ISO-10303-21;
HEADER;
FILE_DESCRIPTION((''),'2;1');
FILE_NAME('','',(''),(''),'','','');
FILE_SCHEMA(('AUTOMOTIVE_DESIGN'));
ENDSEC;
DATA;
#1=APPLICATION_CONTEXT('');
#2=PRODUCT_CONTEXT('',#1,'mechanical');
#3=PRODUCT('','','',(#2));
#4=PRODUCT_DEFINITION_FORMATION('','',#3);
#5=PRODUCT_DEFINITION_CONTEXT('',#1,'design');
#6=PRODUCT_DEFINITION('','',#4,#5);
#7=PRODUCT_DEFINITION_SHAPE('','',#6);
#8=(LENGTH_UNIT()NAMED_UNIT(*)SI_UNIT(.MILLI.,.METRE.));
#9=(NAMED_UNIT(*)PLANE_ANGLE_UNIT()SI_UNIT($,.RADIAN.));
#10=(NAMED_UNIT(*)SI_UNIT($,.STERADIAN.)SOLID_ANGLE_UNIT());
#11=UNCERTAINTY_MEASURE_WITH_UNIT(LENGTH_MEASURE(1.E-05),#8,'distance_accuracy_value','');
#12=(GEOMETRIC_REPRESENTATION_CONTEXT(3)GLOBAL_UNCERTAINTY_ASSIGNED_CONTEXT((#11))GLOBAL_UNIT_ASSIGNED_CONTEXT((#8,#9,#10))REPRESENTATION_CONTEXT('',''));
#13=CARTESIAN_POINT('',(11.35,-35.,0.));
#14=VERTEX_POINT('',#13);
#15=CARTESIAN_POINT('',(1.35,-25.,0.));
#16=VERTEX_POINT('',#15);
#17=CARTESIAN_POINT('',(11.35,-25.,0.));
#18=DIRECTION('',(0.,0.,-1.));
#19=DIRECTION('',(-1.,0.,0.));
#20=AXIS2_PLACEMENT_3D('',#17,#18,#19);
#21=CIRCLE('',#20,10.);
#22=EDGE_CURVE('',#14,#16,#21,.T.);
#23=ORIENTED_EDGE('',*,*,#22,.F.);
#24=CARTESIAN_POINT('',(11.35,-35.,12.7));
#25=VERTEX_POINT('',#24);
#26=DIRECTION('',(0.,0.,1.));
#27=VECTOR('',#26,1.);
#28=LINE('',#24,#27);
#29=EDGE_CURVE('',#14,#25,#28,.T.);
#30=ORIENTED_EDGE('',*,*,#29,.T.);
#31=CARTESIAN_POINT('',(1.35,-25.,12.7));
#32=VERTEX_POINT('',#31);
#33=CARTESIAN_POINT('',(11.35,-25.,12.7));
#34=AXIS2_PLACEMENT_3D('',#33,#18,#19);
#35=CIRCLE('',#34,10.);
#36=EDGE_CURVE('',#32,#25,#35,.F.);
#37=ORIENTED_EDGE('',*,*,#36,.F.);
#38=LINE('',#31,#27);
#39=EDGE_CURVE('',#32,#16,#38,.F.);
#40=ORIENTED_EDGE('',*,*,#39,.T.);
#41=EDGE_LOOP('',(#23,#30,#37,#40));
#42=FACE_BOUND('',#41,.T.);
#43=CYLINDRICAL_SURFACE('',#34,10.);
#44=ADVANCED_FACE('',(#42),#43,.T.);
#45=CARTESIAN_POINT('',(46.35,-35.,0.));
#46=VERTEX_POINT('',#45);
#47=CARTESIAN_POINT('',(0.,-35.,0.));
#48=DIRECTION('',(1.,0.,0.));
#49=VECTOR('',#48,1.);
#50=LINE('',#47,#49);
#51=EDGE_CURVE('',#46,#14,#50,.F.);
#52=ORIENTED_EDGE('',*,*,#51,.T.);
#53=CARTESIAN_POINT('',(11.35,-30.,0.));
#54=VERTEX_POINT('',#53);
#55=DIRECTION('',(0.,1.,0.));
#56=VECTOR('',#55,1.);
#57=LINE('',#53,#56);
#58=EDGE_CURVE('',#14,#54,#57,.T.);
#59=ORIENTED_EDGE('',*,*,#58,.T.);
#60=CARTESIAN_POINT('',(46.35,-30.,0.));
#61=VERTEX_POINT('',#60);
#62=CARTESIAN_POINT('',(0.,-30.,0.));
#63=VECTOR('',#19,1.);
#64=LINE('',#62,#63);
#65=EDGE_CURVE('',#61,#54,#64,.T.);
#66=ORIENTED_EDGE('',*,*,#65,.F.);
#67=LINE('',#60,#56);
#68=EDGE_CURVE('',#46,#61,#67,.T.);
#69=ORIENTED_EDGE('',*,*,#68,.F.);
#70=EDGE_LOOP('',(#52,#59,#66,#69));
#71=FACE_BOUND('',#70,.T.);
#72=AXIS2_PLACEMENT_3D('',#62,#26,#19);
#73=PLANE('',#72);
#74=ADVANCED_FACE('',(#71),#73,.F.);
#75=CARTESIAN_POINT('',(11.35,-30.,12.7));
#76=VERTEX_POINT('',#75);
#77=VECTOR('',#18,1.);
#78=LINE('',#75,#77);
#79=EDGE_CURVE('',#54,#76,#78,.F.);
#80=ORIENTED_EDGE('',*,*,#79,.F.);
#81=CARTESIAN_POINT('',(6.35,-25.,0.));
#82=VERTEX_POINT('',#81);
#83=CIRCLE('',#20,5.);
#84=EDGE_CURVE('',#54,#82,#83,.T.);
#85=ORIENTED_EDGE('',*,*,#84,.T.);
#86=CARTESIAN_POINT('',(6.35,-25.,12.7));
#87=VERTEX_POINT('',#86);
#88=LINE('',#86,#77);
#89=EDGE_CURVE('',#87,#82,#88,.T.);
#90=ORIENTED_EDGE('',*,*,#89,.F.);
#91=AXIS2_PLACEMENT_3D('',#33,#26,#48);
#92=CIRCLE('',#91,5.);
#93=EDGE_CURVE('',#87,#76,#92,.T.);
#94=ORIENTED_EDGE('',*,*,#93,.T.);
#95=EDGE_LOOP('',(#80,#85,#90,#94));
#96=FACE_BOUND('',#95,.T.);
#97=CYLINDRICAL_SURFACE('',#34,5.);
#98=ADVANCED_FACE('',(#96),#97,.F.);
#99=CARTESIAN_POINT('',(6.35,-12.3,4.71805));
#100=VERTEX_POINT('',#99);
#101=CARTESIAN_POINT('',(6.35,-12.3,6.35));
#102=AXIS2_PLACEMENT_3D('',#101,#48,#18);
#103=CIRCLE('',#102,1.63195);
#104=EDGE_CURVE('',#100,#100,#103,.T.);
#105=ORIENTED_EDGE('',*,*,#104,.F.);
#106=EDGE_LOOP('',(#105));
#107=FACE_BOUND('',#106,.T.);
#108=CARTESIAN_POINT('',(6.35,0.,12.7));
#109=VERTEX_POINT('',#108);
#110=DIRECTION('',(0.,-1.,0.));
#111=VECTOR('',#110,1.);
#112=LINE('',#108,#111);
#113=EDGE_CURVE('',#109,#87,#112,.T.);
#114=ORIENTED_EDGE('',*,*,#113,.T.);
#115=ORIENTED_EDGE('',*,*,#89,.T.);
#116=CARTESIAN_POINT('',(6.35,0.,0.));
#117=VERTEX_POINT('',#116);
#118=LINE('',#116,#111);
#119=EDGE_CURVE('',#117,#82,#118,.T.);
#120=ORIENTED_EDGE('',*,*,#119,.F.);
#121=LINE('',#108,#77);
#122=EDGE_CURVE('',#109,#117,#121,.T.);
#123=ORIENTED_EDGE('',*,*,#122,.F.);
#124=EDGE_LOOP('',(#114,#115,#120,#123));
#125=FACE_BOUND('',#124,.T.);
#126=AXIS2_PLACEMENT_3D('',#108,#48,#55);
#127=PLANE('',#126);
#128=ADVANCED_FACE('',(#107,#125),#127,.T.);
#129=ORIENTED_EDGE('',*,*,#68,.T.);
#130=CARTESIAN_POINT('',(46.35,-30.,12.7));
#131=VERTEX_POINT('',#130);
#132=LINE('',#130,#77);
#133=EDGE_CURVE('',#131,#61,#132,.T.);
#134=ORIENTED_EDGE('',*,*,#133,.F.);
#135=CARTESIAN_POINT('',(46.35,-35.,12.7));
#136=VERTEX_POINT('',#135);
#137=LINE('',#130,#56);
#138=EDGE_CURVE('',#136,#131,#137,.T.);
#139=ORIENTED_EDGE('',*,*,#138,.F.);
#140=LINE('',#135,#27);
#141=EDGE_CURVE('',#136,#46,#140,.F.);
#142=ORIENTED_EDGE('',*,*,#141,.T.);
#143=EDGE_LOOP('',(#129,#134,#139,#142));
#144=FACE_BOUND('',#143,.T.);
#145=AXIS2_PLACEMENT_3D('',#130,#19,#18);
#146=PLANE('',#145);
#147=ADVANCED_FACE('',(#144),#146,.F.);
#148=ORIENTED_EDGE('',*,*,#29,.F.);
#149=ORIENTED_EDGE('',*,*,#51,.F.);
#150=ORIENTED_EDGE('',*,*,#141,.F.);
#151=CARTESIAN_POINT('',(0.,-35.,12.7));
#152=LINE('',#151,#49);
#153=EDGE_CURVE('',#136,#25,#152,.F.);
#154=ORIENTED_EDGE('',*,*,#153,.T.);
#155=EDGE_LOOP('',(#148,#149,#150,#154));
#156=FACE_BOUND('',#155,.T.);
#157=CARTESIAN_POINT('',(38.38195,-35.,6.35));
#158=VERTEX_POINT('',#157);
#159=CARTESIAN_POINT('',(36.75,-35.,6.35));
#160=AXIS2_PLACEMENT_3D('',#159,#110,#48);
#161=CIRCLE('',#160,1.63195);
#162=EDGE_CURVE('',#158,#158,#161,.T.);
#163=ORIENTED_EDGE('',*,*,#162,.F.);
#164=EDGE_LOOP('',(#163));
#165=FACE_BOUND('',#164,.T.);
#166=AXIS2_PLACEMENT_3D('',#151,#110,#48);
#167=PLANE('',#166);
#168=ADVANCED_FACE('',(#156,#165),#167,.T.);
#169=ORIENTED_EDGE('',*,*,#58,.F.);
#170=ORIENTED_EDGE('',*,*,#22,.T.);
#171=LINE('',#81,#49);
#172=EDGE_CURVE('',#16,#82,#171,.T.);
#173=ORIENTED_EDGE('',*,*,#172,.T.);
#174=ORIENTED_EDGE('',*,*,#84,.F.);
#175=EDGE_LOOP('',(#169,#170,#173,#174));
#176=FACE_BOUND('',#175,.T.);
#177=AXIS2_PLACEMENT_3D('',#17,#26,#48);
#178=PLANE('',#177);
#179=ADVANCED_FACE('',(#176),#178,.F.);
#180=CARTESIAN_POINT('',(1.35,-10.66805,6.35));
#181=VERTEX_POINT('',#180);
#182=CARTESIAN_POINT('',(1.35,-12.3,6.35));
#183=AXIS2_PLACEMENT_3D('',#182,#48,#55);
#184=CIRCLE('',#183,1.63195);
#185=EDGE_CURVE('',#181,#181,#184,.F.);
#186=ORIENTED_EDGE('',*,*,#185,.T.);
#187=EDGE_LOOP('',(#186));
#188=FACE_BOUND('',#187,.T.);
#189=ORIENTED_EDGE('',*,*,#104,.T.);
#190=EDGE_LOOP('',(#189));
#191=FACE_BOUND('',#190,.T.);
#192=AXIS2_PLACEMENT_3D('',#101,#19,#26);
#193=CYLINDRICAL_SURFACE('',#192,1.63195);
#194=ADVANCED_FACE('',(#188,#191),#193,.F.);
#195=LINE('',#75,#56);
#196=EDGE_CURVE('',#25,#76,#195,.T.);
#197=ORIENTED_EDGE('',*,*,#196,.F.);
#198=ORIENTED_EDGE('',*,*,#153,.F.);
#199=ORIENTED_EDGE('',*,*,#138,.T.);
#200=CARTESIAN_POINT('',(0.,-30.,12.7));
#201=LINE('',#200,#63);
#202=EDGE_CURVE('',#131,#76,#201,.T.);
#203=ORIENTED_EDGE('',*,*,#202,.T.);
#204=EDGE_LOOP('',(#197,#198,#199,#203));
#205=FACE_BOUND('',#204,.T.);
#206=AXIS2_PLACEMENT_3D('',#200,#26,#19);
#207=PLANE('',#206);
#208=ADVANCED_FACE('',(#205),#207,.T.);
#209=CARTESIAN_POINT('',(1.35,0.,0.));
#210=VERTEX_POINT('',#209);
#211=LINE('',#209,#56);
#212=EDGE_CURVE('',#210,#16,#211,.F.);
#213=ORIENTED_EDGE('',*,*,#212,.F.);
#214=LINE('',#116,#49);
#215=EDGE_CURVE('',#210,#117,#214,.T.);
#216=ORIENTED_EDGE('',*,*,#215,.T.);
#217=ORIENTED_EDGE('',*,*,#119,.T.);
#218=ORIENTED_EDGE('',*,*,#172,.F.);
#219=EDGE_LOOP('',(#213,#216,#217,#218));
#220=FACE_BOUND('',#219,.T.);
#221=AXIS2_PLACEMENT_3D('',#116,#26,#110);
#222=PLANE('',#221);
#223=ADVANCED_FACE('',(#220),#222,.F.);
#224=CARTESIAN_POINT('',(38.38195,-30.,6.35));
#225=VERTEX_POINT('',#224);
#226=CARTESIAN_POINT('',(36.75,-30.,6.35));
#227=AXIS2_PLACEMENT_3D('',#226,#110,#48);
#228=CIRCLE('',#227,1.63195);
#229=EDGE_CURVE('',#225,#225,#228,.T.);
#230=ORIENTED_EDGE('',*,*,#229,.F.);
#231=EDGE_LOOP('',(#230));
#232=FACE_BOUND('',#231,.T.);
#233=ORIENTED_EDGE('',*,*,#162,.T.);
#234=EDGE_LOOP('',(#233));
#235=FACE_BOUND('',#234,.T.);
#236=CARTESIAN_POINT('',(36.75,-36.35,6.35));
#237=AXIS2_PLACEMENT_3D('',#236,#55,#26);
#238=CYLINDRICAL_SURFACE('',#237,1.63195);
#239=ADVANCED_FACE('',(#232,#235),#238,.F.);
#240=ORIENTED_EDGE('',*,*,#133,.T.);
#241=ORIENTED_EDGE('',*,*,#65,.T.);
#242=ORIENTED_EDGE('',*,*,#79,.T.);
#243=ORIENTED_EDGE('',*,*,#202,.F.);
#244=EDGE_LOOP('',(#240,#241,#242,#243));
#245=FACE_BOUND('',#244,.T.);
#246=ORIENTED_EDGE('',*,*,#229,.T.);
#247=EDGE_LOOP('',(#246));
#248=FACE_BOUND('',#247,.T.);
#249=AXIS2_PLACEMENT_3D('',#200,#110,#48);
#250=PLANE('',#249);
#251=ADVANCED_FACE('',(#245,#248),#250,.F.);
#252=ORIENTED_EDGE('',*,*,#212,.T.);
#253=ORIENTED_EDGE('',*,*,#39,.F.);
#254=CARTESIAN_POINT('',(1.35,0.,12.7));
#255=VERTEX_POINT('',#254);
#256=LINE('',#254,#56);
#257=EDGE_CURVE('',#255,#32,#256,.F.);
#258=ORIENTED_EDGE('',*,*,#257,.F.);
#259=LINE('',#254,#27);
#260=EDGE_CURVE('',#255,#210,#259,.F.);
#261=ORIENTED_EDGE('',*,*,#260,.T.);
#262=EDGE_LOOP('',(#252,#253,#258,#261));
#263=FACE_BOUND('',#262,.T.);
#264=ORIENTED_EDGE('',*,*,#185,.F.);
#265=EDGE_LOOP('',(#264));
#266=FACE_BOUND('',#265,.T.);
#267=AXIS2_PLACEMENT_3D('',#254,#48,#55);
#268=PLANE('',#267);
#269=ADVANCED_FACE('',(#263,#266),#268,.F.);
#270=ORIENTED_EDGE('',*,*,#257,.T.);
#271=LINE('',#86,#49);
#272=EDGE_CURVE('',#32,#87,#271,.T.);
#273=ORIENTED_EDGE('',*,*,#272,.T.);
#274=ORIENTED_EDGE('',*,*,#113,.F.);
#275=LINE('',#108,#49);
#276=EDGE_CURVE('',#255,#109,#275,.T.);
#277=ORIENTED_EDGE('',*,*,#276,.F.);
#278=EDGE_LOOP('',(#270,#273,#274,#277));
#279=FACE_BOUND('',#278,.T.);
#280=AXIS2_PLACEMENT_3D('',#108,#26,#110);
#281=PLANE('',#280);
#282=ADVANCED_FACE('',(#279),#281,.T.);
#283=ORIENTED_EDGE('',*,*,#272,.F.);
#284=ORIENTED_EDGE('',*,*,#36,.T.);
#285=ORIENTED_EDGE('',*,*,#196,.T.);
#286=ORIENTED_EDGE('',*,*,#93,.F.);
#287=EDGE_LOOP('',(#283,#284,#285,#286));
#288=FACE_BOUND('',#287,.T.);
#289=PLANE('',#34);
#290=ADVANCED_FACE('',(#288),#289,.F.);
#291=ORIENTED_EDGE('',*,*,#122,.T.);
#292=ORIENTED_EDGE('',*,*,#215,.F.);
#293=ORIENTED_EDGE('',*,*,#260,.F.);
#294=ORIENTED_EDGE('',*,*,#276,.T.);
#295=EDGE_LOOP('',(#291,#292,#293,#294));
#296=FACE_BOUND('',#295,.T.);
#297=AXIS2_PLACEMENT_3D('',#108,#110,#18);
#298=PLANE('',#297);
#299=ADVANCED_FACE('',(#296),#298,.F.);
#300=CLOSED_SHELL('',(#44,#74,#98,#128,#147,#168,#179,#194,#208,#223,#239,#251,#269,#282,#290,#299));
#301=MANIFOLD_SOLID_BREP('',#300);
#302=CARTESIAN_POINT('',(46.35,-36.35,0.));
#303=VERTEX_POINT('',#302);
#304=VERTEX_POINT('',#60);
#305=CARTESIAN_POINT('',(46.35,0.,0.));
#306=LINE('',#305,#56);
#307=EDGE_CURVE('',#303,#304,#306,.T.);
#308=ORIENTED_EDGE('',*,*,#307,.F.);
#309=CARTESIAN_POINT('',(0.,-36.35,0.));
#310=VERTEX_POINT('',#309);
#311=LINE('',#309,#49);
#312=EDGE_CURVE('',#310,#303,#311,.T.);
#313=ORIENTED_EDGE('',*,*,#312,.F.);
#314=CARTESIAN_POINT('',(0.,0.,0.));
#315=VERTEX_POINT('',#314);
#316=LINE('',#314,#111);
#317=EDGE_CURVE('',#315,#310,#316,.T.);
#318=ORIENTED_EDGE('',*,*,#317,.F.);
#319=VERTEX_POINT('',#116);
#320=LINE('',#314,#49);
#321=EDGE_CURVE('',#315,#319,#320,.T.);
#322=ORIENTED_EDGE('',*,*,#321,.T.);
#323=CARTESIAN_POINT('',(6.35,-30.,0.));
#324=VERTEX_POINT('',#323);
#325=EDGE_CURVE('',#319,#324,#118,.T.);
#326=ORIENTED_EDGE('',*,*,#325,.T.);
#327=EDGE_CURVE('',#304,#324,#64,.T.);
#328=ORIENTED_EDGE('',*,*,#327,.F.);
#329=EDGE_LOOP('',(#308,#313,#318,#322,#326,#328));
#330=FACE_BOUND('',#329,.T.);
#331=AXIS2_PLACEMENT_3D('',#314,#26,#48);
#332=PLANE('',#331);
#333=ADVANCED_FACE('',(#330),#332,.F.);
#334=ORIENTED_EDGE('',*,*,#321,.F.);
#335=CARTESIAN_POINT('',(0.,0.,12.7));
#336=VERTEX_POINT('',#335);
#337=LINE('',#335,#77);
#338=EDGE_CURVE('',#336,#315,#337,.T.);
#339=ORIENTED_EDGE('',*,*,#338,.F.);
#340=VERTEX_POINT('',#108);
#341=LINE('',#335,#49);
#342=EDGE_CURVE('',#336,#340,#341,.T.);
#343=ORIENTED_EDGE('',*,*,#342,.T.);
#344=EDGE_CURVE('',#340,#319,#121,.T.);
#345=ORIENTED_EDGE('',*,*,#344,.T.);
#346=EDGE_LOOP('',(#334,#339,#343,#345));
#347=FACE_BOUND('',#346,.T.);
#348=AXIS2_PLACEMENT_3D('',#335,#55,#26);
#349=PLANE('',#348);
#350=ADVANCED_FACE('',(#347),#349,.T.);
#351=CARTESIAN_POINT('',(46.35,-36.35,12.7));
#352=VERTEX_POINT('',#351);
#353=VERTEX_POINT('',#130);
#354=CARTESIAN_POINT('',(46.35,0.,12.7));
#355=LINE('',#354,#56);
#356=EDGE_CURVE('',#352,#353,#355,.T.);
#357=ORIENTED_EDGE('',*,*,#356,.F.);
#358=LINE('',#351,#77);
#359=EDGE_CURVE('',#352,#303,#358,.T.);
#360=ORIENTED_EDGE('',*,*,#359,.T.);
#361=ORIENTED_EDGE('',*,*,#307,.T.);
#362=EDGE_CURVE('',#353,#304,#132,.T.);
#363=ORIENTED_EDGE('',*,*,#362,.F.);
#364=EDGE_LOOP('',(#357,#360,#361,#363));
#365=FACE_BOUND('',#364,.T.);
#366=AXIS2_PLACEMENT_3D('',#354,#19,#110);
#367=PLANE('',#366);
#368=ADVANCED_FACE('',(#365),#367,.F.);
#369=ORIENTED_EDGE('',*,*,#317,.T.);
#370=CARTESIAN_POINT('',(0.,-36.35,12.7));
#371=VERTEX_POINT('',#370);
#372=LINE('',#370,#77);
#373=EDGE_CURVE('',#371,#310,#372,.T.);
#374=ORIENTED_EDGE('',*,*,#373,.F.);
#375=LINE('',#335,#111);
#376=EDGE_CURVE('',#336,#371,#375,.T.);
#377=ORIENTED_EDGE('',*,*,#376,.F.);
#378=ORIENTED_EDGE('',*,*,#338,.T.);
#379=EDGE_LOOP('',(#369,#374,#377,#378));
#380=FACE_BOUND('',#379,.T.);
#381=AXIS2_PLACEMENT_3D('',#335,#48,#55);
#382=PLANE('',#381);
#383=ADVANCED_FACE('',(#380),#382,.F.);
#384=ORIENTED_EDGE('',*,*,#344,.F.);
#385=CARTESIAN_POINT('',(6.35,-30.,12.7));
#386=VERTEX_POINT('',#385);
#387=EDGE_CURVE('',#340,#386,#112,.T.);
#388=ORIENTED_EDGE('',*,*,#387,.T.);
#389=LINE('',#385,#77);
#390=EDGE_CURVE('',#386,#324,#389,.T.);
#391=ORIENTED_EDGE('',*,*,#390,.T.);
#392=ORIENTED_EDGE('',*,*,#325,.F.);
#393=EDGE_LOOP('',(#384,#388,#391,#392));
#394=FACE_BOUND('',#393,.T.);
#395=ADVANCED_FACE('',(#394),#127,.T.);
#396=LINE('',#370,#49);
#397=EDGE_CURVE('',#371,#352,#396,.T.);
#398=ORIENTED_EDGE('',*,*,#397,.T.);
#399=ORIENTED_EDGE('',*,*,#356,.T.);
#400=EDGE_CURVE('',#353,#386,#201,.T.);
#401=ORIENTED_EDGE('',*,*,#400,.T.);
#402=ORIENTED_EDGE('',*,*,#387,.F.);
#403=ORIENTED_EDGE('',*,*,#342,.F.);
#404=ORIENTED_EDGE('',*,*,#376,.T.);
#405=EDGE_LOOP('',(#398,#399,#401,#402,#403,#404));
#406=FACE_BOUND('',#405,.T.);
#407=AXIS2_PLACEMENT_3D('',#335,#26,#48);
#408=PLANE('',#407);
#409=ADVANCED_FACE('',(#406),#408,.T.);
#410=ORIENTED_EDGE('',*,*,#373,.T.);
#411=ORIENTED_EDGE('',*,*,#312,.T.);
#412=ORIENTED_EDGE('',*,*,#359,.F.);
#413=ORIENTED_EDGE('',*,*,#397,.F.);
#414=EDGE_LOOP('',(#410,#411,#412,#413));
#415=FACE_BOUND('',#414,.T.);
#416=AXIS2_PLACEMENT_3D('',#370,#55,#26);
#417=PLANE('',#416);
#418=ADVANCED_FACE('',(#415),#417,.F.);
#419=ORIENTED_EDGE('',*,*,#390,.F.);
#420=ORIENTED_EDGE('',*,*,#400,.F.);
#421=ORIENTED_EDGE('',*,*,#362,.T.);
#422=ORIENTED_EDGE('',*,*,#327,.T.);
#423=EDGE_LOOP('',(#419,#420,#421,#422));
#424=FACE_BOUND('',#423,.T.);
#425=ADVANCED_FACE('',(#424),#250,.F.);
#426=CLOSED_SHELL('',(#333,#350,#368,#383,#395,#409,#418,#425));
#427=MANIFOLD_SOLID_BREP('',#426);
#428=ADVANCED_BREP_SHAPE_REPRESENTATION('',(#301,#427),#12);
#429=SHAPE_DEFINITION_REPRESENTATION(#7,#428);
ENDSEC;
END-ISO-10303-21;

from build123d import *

# Parameters (mm, degrees)
SKETCH1_W               = 6.35
SKETCH1_H               = 30
BOSS_EXTRUDE1_DEPTH     = 12.7
CONVERT_SOLID1_DEPTH    = 12.7
SKETCH6_R               = 1.63195
CUT_EXTRUDE1_DEPTH      = 6.35
CUT_EXTRUDE2_DEPTH      = 61.257240229
CUT_EXTRUDE2_DEPTH_BACK = 61.257240229
SKETCH7_R               = 1.63195


# Read off the part's stored shape, not the designer's step: Convert-Solid1
with BuildPart() as part:
    # Sketch1 → Boss-Extrude1 (new body)
    with BuildSketch(Plane.XY):
        Polygon((46.35, -36.35), (46.35, -30), (6.35, -30), (0, -30), (0, -36.35), align=None)
        with Locations((3.175, -15)):
            Rectangle(SKETCH1_W, SKETCH1_H)
    extrude(amount=BOSS_EXTRUDE1_DEPTH)


with BuildPart() as body_2:
    # Convert-Solid1 outline → Convert-Solid1 (new body)
    with BuildSketch(Plane.XY):
        with BuildLine():
            Line((6.35, 0), (1.35, 0))
            Line((1.35, 0), (1.35, -25))
            ThreePointArc((1.35, -25), (4.278932188, -32.071067812), (11.35, -35))
            Line((11.35, -35), (46.35, -35))
            Line((46.35, -35), (46.35, -30))
            Line((46.35, -30), (11.35, -30))
            ThreePointArc((11.35, -30), (7.814466094, -28.535533906), (6.35, -25))
            Line((6.35, -25), (6.35, 0))
        make_face()
    extrude(amount=CONVERT_SOLID1_DEPTH)

    # Sketch6 → Cut-Extrude1 (cut)
    with BuildSketch(Plane(origin=(0, 0, 0), x_dir=(0, 0, -1), z_dir=(1, 0, 0))):
        with Locations(Location((-6.35, -12.3, 0), (0, 0, 90))):
            Circle(SKETCH6_R)
    extrude(amount=CUT_EXTRUDE1_DEPTH, mode=Mode.SUBTRACT)

    # Sketch7 → Cut-Extrude2 (cut, two sides: drawn at the far end of the back side and taken through both)
    with BuildSketch(Plane(origin=(0, 0, 0), x_dir=(1, 0, 0), z_dir=(0, 1, 0)).offset(-CUT_EXTRUDE2_DEPTH_BACK)):
        with Locations((36.75, -6.35)):
            Circle(SKETCH7_R)
        with Locations((62.15, -6.35)):
            Circle(SKETCH7_R)
    extrude(amount=CUT_EXTRUDE2_DEPTH + CUT_EXTRUDE2_DEPTH_BACK, mode=Mode.SUBTRACT)


solid = Compound([part.part, body_2.part])
